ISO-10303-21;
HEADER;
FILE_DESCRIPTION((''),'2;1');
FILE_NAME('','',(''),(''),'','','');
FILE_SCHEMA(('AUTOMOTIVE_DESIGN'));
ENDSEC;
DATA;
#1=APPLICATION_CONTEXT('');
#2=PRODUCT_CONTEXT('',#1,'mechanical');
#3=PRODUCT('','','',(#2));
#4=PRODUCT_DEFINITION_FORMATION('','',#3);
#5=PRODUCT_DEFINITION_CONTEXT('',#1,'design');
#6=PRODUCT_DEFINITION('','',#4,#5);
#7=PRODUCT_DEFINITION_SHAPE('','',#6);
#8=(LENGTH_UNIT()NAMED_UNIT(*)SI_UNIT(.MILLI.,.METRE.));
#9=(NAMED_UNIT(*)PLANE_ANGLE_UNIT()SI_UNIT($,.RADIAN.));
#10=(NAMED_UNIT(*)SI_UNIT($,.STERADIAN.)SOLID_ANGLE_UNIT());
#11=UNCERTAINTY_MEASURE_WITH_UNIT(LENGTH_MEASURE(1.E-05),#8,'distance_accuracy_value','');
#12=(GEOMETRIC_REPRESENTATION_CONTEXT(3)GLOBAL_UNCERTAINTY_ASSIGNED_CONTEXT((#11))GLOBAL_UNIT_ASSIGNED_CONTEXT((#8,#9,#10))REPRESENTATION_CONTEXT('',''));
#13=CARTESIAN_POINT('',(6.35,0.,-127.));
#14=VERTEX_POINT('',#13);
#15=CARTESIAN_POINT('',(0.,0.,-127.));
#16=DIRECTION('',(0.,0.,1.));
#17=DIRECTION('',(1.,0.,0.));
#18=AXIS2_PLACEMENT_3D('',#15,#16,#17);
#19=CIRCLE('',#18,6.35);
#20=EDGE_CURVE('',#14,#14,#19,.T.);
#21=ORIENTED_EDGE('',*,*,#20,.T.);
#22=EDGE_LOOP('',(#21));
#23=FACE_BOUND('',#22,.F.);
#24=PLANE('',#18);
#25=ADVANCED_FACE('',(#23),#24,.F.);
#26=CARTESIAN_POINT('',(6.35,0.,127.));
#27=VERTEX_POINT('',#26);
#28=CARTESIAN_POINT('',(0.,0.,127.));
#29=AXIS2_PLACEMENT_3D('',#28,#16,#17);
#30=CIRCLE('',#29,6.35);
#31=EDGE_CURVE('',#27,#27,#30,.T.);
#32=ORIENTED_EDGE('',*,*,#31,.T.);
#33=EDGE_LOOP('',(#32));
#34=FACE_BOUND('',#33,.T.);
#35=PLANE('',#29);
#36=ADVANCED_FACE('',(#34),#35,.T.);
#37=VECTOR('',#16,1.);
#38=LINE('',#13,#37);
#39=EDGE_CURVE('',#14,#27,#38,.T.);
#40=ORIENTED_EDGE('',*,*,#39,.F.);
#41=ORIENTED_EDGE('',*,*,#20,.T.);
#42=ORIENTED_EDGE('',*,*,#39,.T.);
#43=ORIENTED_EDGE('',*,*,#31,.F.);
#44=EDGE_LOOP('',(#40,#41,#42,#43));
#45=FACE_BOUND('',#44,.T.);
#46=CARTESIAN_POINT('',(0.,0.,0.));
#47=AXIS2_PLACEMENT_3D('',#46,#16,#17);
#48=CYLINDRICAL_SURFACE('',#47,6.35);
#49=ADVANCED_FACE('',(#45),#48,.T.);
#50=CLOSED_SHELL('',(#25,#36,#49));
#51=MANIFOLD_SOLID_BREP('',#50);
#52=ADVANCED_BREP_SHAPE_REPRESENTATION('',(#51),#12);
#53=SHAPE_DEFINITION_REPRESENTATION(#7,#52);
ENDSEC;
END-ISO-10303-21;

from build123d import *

# Parameters (mm, degrees)
F0_R     = 6.35
F1_DEPTH = 127


# Not quite as in the source:
# - a feature of the source that left no trace in its solid (it failed there, or was rolled back) is left out


with BuildPart() as f1:
    # F0 (on Top) → F1 (new body, symmetric)
    with BuildSketch(Plane.XY):
        Circle(F0_R)
    extrude(amount=F1_DEPTH, both=True)


solid = f1.part
